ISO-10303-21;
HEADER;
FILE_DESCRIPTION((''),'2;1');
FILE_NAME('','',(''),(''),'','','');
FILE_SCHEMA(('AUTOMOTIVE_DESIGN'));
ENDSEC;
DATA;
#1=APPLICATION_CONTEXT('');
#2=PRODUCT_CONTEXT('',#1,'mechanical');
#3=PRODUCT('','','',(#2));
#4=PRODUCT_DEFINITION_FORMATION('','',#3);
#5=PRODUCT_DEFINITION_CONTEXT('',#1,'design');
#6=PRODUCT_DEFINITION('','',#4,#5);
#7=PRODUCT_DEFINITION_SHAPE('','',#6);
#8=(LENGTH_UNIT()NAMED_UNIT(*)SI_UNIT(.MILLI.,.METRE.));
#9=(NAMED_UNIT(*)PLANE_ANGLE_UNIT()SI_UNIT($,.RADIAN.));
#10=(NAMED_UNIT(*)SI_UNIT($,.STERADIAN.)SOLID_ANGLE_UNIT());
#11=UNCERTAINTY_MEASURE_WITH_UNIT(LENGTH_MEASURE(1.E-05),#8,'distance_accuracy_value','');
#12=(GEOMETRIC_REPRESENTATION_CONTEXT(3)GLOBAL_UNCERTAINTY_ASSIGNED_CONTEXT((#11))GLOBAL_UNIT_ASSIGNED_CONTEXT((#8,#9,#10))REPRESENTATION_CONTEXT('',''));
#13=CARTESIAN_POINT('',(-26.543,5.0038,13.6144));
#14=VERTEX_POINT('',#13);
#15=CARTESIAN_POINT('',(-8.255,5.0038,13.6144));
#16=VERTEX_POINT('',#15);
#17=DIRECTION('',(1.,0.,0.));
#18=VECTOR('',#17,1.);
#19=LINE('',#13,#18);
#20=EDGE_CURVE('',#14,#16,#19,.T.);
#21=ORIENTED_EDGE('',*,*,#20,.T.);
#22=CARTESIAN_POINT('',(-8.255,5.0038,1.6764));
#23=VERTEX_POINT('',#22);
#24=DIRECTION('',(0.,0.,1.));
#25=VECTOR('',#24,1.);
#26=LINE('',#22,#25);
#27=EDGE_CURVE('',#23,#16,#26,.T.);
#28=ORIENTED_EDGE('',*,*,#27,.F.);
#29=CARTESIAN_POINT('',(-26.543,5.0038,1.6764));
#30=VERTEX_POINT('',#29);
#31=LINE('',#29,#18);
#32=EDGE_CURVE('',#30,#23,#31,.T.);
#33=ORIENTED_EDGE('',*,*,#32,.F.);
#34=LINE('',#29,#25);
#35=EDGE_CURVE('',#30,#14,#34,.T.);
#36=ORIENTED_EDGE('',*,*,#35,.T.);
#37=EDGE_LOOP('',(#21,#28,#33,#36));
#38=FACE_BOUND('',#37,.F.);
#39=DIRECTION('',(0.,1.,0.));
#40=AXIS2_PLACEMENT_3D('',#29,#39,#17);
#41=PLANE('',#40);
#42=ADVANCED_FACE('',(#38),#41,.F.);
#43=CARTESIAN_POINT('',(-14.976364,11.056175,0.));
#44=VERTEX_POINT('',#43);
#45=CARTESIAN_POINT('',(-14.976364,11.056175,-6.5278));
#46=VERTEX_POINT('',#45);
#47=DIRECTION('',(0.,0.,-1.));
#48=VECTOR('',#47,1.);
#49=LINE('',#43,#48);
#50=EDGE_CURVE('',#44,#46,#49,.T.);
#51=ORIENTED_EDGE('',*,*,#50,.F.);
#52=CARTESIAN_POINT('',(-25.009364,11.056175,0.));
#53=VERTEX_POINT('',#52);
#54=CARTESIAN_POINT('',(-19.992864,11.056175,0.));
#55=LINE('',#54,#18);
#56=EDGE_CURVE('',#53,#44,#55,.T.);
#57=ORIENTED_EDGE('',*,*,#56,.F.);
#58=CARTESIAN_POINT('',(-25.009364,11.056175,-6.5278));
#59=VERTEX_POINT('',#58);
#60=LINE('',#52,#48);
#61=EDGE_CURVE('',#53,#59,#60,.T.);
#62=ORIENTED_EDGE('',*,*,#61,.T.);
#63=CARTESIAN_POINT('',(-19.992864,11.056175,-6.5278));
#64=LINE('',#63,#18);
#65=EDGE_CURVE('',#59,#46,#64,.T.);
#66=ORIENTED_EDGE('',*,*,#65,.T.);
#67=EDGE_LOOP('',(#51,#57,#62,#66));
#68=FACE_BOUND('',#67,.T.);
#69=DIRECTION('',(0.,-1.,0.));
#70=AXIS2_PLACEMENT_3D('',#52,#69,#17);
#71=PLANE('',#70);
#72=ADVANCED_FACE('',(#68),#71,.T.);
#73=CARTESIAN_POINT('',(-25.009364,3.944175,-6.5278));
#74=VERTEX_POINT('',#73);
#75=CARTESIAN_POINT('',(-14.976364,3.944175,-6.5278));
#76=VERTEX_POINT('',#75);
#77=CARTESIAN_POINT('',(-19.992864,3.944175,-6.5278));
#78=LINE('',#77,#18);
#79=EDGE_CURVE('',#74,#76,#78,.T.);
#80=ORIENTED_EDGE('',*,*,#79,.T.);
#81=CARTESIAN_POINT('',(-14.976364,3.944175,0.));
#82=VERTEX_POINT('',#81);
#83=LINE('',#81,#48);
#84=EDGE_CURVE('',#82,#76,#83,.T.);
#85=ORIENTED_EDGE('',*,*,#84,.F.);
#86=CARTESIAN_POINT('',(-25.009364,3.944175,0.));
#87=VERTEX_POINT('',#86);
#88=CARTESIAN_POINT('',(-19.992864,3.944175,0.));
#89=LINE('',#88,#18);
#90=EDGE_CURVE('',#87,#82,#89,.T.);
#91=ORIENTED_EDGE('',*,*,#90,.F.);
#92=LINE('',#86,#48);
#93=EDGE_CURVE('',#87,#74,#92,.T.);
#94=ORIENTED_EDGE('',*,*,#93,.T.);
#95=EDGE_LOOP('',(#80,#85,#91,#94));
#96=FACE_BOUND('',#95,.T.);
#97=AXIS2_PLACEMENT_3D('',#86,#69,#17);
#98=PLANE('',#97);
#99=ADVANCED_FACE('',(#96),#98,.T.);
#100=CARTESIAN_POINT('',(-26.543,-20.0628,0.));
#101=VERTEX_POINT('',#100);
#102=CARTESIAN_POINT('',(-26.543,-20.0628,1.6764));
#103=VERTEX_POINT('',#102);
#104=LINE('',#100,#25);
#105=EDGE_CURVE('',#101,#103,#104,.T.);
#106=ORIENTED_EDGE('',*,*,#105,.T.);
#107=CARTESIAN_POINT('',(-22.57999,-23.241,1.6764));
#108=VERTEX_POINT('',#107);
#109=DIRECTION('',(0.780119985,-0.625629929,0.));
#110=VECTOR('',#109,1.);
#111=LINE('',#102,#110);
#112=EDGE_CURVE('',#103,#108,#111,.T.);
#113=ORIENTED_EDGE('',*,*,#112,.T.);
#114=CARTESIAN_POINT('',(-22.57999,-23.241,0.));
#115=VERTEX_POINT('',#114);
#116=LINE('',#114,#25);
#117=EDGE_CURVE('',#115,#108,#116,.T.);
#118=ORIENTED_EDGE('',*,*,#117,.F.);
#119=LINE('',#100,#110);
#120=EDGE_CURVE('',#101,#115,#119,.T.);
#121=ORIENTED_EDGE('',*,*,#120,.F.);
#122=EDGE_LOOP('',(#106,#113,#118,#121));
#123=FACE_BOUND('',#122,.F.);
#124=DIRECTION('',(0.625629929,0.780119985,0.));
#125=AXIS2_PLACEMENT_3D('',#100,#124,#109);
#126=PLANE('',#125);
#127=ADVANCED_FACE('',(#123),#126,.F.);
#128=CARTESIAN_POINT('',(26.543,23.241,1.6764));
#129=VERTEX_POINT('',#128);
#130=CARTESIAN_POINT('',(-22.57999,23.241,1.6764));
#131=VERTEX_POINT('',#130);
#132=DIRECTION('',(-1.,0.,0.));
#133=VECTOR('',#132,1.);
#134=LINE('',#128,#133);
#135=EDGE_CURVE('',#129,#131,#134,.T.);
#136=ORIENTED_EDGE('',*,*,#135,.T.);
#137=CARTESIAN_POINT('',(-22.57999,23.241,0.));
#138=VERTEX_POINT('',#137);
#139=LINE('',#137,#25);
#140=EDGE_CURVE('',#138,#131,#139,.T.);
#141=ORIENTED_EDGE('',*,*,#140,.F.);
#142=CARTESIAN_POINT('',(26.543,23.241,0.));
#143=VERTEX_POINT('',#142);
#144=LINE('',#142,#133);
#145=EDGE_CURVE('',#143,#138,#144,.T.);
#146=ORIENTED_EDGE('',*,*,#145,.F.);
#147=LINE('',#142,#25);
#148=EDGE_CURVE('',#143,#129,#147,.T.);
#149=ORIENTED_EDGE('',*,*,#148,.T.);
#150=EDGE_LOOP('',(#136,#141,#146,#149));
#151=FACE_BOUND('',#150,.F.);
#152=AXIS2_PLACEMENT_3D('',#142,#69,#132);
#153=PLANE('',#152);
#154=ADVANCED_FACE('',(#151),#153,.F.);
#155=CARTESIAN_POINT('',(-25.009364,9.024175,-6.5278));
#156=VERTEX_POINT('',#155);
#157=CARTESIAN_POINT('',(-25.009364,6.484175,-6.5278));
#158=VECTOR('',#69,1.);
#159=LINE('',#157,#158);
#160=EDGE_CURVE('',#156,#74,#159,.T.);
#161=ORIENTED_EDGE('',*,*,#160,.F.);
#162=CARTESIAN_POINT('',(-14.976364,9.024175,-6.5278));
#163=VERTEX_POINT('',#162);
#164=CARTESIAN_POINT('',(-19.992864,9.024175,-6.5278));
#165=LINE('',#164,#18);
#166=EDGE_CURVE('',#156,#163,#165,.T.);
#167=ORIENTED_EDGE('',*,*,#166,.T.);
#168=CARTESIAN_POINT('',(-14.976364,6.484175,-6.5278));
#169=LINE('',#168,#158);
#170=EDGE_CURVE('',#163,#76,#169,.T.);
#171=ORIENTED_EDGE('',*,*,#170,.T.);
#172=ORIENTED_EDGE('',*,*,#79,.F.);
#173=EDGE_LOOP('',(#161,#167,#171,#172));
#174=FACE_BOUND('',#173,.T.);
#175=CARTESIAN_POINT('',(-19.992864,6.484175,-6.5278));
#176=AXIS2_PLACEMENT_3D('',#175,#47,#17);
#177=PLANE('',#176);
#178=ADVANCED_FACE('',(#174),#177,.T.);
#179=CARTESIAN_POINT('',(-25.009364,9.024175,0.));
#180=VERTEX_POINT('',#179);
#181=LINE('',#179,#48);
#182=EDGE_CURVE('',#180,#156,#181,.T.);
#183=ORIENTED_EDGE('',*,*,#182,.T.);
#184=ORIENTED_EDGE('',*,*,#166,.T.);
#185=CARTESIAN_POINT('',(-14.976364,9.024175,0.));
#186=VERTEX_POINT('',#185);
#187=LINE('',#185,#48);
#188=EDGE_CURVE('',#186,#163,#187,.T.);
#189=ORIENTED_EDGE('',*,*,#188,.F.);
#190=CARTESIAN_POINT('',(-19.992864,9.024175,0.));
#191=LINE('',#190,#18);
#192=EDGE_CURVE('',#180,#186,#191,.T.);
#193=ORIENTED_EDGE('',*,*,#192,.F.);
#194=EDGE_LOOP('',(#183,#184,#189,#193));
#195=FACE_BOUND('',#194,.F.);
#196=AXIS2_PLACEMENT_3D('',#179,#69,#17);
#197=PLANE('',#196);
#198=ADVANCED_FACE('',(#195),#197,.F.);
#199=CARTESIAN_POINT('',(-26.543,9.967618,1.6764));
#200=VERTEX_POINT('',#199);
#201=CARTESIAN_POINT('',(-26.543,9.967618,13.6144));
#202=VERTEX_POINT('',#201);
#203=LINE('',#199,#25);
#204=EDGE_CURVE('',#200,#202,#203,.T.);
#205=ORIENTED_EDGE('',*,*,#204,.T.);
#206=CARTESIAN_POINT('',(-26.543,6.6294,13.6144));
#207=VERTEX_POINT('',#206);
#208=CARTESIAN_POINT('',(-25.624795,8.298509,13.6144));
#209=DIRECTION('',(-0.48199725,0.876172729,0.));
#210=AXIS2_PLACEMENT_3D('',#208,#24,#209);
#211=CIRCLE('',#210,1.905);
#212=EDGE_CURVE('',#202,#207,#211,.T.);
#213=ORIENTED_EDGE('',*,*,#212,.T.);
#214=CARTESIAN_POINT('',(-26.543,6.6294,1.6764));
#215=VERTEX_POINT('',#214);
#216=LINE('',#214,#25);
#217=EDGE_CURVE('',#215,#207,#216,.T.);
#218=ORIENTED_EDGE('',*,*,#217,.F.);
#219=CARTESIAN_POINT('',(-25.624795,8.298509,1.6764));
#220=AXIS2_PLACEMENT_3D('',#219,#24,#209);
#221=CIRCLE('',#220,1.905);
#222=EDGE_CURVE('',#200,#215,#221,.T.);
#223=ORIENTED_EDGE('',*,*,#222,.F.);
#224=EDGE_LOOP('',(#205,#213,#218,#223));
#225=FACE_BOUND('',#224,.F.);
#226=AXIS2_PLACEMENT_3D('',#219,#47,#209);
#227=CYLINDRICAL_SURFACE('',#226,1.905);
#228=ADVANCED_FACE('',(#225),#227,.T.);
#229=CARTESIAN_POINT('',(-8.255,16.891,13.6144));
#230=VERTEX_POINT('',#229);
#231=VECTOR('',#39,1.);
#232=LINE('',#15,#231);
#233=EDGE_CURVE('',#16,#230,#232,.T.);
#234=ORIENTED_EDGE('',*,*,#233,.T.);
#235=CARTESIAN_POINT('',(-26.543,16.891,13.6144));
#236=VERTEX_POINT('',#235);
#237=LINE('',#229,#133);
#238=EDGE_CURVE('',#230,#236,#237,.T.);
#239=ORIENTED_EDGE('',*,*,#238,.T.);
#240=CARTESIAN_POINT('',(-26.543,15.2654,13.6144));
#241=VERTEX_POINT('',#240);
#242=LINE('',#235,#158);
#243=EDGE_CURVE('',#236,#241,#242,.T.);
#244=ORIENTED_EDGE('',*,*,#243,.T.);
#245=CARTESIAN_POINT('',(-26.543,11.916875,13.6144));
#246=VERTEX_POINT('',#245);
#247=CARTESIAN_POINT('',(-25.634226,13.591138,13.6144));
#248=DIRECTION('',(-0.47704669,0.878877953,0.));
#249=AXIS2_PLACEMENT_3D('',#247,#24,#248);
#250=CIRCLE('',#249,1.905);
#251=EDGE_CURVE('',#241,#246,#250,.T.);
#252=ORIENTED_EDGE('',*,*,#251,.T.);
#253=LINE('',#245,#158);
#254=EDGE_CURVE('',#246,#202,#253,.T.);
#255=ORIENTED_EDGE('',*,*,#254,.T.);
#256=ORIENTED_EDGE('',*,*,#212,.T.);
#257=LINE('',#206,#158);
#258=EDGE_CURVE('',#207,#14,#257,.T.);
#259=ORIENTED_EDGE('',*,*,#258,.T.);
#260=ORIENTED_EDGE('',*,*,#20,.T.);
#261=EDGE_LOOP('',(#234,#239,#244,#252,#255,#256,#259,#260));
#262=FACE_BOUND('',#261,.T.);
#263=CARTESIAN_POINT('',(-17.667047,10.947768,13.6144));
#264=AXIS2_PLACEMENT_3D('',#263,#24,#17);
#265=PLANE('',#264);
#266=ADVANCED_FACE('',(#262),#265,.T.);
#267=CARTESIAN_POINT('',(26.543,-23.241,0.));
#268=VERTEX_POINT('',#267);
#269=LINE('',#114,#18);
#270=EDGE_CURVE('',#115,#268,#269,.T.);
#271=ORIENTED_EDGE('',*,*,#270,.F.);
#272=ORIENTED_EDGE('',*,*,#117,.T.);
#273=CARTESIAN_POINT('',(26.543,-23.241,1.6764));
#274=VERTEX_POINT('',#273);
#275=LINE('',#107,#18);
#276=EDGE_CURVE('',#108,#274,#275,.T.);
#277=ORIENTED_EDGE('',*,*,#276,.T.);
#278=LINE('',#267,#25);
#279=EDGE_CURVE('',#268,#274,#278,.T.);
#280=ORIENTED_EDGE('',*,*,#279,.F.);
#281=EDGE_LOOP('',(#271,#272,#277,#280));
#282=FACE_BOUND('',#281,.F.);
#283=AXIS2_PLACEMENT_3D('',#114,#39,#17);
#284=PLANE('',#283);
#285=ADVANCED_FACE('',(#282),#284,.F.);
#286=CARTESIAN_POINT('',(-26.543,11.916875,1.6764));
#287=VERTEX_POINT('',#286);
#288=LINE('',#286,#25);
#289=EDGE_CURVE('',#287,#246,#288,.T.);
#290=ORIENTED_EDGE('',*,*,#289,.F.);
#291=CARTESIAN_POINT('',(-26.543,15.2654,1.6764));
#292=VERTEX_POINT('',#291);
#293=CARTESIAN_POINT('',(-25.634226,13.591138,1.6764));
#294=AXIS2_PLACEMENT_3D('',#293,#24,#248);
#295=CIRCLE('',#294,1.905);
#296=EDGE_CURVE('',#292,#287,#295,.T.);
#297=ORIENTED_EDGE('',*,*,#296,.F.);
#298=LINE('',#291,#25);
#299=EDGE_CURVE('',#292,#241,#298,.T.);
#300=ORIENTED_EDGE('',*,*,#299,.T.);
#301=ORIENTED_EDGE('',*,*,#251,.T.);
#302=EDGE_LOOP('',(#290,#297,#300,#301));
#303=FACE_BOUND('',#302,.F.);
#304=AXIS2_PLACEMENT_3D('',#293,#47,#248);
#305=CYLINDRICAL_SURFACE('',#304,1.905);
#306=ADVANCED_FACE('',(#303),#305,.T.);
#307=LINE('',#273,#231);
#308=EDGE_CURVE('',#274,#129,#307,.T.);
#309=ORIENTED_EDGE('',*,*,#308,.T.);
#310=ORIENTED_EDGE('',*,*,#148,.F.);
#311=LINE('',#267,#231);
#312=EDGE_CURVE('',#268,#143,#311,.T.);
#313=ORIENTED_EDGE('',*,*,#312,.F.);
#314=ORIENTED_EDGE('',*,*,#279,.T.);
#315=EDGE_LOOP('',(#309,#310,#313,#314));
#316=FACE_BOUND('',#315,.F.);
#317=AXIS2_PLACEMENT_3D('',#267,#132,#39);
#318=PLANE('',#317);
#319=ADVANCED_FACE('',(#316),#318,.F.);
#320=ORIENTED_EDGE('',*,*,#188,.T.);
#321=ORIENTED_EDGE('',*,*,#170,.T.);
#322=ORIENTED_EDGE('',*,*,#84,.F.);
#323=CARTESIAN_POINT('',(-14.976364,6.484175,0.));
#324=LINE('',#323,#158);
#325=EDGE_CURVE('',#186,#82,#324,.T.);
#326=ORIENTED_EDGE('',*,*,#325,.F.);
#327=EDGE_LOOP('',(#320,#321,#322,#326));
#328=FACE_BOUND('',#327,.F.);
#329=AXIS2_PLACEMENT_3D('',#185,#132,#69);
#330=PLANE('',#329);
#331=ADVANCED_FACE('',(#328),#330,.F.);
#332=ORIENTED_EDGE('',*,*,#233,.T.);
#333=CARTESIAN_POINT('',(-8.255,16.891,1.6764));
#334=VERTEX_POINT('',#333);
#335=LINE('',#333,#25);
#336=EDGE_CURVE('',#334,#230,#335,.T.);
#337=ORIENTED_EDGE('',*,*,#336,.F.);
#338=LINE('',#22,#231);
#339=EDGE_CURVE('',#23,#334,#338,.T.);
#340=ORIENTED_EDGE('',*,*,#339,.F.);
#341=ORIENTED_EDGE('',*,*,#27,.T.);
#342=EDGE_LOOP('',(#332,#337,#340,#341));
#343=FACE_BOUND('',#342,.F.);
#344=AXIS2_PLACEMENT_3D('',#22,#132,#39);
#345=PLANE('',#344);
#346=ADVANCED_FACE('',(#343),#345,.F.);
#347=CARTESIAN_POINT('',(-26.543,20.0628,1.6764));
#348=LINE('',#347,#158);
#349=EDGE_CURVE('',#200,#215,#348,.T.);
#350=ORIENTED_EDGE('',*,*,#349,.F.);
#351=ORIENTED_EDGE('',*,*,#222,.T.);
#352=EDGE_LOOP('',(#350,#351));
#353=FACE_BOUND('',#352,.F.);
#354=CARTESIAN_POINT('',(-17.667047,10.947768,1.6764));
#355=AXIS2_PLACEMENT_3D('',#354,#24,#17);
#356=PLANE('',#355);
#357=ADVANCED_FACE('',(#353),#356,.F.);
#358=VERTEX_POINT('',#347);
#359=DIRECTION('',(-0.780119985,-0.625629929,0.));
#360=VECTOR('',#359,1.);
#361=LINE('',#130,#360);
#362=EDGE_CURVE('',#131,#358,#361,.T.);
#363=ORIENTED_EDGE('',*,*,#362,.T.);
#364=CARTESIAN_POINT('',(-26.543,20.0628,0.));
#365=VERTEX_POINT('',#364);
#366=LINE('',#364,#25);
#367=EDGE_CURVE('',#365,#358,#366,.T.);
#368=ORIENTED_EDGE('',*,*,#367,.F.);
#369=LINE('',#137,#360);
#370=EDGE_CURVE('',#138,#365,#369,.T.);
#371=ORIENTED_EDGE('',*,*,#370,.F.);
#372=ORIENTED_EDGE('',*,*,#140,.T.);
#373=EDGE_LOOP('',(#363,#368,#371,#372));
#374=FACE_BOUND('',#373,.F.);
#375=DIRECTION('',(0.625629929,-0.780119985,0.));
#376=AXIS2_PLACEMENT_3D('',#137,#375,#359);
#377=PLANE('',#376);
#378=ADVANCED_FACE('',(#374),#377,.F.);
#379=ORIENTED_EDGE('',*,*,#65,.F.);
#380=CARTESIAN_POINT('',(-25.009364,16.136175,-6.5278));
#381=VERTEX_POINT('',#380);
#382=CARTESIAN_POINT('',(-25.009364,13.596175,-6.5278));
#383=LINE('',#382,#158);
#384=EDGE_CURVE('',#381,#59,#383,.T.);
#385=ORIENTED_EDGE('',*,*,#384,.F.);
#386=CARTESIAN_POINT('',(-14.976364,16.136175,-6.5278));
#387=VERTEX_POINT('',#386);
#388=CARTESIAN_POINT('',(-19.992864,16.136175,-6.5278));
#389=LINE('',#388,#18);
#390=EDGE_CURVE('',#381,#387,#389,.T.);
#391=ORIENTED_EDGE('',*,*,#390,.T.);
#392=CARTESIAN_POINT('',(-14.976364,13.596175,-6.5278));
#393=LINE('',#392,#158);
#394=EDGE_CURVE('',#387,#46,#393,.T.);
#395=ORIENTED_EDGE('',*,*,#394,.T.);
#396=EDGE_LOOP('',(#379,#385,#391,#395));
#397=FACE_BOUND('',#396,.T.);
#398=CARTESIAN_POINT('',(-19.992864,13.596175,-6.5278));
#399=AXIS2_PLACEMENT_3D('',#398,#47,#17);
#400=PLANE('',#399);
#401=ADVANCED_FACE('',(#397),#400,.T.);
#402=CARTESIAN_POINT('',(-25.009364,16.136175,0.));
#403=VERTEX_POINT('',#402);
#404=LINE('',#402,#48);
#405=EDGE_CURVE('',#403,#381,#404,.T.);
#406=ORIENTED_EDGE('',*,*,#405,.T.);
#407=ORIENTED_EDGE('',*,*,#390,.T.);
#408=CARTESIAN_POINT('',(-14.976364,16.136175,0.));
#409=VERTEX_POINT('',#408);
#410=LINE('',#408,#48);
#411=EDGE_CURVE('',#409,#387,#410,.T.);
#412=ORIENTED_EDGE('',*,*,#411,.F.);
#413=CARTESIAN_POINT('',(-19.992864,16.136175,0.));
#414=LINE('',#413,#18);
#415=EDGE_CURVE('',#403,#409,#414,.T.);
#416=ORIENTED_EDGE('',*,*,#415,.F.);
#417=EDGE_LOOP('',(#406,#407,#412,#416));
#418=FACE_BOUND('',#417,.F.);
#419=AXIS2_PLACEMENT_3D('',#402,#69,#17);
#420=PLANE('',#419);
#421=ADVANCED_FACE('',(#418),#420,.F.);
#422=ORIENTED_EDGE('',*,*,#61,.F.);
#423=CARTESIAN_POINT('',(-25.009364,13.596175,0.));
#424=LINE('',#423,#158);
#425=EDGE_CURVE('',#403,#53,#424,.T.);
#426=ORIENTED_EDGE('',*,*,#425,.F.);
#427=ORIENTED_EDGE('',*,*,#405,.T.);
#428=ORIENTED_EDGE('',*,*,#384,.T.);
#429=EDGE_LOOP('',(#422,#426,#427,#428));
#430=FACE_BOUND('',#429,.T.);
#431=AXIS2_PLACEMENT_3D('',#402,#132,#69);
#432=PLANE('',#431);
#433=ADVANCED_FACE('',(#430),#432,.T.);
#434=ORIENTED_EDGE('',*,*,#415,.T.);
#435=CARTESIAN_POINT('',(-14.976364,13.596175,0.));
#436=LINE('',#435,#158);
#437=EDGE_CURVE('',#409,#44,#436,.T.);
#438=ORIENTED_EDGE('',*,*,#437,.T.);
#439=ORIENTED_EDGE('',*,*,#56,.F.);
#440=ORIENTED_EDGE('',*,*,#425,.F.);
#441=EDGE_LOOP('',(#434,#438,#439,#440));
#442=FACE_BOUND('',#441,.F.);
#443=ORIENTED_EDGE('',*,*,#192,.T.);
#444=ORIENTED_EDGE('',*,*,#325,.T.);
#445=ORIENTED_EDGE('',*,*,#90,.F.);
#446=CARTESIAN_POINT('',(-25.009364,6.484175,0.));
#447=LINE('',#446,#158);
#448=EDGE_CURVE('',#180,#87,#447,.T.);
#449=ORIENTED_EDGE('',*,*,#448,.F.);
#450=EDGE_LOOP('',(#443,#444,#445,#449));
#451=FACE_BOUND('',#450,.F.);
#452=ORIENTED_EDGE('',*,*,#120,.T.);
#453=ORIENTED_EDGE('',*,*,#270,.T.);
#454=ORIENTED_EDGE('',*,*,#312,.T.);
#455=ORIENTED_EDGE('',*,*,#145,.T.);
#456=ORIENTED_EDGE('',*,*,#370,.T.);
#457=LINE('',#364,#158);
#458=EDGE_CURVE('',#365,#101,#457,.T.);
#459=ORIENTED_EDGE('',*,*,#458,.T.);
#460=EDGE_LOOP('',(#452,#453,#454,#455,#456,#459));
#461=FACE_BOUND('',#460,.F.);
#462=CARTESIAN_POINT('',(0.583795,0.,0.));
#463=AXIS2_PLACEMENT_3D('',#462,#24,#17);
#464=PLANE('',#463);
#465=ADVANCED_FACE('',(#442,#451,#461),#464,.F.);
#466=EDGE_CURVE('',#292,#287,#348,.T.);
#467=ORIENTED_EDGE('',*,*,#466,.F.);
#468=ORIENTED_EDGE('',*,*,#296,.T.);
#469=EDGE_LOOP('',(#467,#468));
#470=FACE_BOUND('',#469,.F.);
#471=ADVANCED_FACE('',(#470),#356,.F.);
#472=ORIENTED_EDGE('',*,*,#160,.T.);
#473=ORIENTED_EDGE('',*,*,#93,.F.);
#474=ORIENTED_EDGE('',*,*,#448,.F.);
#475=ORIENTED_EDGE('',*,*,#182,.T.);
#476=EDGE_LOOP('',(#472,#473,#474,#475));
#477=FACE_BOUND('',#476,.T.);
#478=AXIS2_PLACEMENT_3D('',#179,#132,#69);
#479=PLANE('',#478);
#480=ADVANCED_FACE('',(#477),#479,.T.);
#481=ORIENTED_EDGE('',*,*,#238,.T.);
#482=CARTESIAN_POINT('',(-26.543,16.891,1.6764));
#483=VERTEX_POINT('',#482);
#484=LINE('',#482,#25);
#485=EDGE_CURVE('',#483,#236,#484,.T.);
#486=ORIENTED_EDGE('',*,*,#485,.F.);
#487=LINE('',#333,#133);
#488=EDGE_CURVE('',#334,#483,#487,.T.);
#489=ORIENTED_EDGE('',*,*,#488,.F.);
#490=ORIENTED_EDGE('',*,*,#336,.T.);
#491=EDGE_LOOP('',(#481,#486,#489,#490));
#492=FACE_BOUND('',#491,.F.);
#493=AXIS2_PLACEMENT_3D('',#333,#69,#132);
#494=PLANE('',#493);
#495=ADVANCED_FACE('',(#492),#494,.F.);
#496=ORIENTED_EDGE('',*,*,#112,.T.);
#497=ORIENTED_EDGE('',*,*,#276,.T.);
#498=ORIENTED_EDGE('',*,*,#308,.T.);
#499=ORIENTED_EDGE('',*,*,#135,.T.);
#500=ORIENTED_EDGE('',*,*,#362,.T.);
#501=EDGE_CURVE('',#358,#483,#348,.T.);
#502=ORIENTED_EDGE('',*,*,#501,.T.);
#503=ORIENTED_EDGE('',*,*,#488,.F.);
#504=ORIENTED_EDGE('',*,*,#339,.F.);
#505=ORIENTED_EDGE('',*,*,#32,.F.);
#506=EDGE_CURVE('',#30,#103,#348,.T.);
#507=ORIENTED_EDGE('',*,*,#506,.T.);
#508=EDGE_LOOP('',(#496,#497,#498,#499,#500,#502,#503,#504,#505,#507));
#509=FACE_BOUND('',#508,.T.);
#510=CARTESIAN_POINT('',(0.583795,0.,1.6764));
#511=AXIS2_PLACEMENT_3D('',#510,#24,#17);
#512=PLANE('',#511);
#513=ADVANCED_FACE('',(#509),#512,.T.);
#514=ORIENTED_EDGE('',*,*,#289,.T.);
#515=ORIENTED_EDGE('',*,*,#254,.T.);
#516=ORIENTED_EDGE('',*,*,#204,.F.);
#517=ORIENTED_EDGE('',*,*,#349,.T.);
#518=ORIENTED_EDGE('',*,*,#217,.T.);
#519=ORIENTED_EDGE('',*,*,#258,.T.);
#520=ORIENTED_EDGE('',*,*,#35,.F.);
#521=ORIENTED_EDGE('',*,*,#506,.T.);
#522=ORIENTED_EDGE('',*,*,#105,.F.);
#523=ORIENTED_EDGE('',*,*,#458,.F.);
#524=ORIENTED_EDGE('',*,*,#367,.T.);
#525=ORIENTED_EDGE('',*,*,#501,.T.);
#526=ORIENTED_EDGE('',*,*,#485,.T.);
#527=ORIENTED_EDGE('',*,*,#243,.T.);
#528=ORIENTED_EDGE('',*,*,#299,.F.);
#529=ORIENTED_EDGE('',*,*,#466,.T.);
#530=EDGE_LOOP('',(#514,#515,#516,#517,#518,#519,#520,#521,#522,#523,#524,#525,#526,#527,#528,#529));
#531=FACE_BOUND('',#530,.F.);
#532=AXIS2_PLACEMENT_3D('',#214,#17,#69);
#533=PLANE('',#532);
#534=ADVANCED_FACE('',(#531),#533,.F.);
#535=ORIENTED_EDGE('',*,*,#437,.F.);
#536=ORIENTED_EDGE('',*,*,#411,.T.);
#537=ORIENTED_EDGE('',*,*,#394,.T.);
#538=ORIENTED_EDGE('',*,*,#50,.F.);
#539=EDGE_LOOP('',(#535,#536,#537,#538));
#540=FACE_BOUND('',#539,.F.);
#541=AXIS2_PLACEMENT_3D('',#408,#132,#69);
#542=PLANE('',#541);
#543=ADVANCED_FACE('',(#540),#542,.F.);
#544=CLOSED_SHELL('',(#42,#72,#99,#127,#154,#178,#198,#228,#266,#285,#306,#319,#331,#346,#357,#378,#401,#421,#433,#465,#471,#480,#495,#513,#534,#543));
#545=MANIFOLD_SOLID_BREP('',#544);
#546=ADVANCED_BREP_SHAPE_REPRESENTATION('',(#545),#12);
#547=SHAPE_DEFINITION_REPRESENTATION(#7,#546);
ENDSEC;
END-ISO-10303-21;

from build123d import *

# Parameters (mm, degrees)
F1_DEPTH = 1.6764
F3_DEPTH = 11.938
F4_W     = 10.033
F4_H     = 5.08
F5_DEPTH = 6.5278


with BuildPart() as f1:
    # F0 (on Top) → F1 (new body)
    with BuildSketch(Plane.XY):
        Polygon((-22.5799904745, -23.241), (26.543, -23.241), (26.543, 23.241), (-22.5799904745, 23.241), (-26.543, 20.062799959), (-26.543, -20.062799959), align=None)
    extrude(amount=F1_DEPTH)

    # F2 (on face) → F3 (join)
    with BuildSketch(Plane.XY.offset(1.6764)):
        with BuildLine():
            Line((-26.543, 6.6294), (-26.543, 5.0038))
            Line((-26.543, 5.0038), (-8.255, 5.0038))
            Line((-8.255, 5.0038), (-8.255, 16.891))
            Line((-8.255, 16.891), (-26.543, 16.891))
            Line((-26.543, 16.891), (-26.543, 15.2654))
            ThreePointArc((-26.543, 15.2654), (-27.5392260553, 13.5911375004), (-26.543, 11.9168750008))
            Line((-26.543, 11.9168750008), (-26.543, 9.967618097))
            ThreePointArc((-26.543, 9.967618097), (-27.5297952384, 8.2985090485), (-26.543, 6.6294))
        make_face()
    extrude(amount=F3_DEPTH)

    # F4 (on face) → F5 (join)
    with BuildSketch(Plane(origin=(0, 0, 0), x_dir=(1, 0, 0), z_dir=(0, 0, -1))):
        with Locations((-19.9928638897, -13.5961750215)):
            Rectangle(F4_W, F4_H)
        with Locations((-19.9928638897, -6.4841750215)):
            Rectangle(F4_W, F4_H)
    extrude(amount=F5_DEPTH)


solid = f1.part
